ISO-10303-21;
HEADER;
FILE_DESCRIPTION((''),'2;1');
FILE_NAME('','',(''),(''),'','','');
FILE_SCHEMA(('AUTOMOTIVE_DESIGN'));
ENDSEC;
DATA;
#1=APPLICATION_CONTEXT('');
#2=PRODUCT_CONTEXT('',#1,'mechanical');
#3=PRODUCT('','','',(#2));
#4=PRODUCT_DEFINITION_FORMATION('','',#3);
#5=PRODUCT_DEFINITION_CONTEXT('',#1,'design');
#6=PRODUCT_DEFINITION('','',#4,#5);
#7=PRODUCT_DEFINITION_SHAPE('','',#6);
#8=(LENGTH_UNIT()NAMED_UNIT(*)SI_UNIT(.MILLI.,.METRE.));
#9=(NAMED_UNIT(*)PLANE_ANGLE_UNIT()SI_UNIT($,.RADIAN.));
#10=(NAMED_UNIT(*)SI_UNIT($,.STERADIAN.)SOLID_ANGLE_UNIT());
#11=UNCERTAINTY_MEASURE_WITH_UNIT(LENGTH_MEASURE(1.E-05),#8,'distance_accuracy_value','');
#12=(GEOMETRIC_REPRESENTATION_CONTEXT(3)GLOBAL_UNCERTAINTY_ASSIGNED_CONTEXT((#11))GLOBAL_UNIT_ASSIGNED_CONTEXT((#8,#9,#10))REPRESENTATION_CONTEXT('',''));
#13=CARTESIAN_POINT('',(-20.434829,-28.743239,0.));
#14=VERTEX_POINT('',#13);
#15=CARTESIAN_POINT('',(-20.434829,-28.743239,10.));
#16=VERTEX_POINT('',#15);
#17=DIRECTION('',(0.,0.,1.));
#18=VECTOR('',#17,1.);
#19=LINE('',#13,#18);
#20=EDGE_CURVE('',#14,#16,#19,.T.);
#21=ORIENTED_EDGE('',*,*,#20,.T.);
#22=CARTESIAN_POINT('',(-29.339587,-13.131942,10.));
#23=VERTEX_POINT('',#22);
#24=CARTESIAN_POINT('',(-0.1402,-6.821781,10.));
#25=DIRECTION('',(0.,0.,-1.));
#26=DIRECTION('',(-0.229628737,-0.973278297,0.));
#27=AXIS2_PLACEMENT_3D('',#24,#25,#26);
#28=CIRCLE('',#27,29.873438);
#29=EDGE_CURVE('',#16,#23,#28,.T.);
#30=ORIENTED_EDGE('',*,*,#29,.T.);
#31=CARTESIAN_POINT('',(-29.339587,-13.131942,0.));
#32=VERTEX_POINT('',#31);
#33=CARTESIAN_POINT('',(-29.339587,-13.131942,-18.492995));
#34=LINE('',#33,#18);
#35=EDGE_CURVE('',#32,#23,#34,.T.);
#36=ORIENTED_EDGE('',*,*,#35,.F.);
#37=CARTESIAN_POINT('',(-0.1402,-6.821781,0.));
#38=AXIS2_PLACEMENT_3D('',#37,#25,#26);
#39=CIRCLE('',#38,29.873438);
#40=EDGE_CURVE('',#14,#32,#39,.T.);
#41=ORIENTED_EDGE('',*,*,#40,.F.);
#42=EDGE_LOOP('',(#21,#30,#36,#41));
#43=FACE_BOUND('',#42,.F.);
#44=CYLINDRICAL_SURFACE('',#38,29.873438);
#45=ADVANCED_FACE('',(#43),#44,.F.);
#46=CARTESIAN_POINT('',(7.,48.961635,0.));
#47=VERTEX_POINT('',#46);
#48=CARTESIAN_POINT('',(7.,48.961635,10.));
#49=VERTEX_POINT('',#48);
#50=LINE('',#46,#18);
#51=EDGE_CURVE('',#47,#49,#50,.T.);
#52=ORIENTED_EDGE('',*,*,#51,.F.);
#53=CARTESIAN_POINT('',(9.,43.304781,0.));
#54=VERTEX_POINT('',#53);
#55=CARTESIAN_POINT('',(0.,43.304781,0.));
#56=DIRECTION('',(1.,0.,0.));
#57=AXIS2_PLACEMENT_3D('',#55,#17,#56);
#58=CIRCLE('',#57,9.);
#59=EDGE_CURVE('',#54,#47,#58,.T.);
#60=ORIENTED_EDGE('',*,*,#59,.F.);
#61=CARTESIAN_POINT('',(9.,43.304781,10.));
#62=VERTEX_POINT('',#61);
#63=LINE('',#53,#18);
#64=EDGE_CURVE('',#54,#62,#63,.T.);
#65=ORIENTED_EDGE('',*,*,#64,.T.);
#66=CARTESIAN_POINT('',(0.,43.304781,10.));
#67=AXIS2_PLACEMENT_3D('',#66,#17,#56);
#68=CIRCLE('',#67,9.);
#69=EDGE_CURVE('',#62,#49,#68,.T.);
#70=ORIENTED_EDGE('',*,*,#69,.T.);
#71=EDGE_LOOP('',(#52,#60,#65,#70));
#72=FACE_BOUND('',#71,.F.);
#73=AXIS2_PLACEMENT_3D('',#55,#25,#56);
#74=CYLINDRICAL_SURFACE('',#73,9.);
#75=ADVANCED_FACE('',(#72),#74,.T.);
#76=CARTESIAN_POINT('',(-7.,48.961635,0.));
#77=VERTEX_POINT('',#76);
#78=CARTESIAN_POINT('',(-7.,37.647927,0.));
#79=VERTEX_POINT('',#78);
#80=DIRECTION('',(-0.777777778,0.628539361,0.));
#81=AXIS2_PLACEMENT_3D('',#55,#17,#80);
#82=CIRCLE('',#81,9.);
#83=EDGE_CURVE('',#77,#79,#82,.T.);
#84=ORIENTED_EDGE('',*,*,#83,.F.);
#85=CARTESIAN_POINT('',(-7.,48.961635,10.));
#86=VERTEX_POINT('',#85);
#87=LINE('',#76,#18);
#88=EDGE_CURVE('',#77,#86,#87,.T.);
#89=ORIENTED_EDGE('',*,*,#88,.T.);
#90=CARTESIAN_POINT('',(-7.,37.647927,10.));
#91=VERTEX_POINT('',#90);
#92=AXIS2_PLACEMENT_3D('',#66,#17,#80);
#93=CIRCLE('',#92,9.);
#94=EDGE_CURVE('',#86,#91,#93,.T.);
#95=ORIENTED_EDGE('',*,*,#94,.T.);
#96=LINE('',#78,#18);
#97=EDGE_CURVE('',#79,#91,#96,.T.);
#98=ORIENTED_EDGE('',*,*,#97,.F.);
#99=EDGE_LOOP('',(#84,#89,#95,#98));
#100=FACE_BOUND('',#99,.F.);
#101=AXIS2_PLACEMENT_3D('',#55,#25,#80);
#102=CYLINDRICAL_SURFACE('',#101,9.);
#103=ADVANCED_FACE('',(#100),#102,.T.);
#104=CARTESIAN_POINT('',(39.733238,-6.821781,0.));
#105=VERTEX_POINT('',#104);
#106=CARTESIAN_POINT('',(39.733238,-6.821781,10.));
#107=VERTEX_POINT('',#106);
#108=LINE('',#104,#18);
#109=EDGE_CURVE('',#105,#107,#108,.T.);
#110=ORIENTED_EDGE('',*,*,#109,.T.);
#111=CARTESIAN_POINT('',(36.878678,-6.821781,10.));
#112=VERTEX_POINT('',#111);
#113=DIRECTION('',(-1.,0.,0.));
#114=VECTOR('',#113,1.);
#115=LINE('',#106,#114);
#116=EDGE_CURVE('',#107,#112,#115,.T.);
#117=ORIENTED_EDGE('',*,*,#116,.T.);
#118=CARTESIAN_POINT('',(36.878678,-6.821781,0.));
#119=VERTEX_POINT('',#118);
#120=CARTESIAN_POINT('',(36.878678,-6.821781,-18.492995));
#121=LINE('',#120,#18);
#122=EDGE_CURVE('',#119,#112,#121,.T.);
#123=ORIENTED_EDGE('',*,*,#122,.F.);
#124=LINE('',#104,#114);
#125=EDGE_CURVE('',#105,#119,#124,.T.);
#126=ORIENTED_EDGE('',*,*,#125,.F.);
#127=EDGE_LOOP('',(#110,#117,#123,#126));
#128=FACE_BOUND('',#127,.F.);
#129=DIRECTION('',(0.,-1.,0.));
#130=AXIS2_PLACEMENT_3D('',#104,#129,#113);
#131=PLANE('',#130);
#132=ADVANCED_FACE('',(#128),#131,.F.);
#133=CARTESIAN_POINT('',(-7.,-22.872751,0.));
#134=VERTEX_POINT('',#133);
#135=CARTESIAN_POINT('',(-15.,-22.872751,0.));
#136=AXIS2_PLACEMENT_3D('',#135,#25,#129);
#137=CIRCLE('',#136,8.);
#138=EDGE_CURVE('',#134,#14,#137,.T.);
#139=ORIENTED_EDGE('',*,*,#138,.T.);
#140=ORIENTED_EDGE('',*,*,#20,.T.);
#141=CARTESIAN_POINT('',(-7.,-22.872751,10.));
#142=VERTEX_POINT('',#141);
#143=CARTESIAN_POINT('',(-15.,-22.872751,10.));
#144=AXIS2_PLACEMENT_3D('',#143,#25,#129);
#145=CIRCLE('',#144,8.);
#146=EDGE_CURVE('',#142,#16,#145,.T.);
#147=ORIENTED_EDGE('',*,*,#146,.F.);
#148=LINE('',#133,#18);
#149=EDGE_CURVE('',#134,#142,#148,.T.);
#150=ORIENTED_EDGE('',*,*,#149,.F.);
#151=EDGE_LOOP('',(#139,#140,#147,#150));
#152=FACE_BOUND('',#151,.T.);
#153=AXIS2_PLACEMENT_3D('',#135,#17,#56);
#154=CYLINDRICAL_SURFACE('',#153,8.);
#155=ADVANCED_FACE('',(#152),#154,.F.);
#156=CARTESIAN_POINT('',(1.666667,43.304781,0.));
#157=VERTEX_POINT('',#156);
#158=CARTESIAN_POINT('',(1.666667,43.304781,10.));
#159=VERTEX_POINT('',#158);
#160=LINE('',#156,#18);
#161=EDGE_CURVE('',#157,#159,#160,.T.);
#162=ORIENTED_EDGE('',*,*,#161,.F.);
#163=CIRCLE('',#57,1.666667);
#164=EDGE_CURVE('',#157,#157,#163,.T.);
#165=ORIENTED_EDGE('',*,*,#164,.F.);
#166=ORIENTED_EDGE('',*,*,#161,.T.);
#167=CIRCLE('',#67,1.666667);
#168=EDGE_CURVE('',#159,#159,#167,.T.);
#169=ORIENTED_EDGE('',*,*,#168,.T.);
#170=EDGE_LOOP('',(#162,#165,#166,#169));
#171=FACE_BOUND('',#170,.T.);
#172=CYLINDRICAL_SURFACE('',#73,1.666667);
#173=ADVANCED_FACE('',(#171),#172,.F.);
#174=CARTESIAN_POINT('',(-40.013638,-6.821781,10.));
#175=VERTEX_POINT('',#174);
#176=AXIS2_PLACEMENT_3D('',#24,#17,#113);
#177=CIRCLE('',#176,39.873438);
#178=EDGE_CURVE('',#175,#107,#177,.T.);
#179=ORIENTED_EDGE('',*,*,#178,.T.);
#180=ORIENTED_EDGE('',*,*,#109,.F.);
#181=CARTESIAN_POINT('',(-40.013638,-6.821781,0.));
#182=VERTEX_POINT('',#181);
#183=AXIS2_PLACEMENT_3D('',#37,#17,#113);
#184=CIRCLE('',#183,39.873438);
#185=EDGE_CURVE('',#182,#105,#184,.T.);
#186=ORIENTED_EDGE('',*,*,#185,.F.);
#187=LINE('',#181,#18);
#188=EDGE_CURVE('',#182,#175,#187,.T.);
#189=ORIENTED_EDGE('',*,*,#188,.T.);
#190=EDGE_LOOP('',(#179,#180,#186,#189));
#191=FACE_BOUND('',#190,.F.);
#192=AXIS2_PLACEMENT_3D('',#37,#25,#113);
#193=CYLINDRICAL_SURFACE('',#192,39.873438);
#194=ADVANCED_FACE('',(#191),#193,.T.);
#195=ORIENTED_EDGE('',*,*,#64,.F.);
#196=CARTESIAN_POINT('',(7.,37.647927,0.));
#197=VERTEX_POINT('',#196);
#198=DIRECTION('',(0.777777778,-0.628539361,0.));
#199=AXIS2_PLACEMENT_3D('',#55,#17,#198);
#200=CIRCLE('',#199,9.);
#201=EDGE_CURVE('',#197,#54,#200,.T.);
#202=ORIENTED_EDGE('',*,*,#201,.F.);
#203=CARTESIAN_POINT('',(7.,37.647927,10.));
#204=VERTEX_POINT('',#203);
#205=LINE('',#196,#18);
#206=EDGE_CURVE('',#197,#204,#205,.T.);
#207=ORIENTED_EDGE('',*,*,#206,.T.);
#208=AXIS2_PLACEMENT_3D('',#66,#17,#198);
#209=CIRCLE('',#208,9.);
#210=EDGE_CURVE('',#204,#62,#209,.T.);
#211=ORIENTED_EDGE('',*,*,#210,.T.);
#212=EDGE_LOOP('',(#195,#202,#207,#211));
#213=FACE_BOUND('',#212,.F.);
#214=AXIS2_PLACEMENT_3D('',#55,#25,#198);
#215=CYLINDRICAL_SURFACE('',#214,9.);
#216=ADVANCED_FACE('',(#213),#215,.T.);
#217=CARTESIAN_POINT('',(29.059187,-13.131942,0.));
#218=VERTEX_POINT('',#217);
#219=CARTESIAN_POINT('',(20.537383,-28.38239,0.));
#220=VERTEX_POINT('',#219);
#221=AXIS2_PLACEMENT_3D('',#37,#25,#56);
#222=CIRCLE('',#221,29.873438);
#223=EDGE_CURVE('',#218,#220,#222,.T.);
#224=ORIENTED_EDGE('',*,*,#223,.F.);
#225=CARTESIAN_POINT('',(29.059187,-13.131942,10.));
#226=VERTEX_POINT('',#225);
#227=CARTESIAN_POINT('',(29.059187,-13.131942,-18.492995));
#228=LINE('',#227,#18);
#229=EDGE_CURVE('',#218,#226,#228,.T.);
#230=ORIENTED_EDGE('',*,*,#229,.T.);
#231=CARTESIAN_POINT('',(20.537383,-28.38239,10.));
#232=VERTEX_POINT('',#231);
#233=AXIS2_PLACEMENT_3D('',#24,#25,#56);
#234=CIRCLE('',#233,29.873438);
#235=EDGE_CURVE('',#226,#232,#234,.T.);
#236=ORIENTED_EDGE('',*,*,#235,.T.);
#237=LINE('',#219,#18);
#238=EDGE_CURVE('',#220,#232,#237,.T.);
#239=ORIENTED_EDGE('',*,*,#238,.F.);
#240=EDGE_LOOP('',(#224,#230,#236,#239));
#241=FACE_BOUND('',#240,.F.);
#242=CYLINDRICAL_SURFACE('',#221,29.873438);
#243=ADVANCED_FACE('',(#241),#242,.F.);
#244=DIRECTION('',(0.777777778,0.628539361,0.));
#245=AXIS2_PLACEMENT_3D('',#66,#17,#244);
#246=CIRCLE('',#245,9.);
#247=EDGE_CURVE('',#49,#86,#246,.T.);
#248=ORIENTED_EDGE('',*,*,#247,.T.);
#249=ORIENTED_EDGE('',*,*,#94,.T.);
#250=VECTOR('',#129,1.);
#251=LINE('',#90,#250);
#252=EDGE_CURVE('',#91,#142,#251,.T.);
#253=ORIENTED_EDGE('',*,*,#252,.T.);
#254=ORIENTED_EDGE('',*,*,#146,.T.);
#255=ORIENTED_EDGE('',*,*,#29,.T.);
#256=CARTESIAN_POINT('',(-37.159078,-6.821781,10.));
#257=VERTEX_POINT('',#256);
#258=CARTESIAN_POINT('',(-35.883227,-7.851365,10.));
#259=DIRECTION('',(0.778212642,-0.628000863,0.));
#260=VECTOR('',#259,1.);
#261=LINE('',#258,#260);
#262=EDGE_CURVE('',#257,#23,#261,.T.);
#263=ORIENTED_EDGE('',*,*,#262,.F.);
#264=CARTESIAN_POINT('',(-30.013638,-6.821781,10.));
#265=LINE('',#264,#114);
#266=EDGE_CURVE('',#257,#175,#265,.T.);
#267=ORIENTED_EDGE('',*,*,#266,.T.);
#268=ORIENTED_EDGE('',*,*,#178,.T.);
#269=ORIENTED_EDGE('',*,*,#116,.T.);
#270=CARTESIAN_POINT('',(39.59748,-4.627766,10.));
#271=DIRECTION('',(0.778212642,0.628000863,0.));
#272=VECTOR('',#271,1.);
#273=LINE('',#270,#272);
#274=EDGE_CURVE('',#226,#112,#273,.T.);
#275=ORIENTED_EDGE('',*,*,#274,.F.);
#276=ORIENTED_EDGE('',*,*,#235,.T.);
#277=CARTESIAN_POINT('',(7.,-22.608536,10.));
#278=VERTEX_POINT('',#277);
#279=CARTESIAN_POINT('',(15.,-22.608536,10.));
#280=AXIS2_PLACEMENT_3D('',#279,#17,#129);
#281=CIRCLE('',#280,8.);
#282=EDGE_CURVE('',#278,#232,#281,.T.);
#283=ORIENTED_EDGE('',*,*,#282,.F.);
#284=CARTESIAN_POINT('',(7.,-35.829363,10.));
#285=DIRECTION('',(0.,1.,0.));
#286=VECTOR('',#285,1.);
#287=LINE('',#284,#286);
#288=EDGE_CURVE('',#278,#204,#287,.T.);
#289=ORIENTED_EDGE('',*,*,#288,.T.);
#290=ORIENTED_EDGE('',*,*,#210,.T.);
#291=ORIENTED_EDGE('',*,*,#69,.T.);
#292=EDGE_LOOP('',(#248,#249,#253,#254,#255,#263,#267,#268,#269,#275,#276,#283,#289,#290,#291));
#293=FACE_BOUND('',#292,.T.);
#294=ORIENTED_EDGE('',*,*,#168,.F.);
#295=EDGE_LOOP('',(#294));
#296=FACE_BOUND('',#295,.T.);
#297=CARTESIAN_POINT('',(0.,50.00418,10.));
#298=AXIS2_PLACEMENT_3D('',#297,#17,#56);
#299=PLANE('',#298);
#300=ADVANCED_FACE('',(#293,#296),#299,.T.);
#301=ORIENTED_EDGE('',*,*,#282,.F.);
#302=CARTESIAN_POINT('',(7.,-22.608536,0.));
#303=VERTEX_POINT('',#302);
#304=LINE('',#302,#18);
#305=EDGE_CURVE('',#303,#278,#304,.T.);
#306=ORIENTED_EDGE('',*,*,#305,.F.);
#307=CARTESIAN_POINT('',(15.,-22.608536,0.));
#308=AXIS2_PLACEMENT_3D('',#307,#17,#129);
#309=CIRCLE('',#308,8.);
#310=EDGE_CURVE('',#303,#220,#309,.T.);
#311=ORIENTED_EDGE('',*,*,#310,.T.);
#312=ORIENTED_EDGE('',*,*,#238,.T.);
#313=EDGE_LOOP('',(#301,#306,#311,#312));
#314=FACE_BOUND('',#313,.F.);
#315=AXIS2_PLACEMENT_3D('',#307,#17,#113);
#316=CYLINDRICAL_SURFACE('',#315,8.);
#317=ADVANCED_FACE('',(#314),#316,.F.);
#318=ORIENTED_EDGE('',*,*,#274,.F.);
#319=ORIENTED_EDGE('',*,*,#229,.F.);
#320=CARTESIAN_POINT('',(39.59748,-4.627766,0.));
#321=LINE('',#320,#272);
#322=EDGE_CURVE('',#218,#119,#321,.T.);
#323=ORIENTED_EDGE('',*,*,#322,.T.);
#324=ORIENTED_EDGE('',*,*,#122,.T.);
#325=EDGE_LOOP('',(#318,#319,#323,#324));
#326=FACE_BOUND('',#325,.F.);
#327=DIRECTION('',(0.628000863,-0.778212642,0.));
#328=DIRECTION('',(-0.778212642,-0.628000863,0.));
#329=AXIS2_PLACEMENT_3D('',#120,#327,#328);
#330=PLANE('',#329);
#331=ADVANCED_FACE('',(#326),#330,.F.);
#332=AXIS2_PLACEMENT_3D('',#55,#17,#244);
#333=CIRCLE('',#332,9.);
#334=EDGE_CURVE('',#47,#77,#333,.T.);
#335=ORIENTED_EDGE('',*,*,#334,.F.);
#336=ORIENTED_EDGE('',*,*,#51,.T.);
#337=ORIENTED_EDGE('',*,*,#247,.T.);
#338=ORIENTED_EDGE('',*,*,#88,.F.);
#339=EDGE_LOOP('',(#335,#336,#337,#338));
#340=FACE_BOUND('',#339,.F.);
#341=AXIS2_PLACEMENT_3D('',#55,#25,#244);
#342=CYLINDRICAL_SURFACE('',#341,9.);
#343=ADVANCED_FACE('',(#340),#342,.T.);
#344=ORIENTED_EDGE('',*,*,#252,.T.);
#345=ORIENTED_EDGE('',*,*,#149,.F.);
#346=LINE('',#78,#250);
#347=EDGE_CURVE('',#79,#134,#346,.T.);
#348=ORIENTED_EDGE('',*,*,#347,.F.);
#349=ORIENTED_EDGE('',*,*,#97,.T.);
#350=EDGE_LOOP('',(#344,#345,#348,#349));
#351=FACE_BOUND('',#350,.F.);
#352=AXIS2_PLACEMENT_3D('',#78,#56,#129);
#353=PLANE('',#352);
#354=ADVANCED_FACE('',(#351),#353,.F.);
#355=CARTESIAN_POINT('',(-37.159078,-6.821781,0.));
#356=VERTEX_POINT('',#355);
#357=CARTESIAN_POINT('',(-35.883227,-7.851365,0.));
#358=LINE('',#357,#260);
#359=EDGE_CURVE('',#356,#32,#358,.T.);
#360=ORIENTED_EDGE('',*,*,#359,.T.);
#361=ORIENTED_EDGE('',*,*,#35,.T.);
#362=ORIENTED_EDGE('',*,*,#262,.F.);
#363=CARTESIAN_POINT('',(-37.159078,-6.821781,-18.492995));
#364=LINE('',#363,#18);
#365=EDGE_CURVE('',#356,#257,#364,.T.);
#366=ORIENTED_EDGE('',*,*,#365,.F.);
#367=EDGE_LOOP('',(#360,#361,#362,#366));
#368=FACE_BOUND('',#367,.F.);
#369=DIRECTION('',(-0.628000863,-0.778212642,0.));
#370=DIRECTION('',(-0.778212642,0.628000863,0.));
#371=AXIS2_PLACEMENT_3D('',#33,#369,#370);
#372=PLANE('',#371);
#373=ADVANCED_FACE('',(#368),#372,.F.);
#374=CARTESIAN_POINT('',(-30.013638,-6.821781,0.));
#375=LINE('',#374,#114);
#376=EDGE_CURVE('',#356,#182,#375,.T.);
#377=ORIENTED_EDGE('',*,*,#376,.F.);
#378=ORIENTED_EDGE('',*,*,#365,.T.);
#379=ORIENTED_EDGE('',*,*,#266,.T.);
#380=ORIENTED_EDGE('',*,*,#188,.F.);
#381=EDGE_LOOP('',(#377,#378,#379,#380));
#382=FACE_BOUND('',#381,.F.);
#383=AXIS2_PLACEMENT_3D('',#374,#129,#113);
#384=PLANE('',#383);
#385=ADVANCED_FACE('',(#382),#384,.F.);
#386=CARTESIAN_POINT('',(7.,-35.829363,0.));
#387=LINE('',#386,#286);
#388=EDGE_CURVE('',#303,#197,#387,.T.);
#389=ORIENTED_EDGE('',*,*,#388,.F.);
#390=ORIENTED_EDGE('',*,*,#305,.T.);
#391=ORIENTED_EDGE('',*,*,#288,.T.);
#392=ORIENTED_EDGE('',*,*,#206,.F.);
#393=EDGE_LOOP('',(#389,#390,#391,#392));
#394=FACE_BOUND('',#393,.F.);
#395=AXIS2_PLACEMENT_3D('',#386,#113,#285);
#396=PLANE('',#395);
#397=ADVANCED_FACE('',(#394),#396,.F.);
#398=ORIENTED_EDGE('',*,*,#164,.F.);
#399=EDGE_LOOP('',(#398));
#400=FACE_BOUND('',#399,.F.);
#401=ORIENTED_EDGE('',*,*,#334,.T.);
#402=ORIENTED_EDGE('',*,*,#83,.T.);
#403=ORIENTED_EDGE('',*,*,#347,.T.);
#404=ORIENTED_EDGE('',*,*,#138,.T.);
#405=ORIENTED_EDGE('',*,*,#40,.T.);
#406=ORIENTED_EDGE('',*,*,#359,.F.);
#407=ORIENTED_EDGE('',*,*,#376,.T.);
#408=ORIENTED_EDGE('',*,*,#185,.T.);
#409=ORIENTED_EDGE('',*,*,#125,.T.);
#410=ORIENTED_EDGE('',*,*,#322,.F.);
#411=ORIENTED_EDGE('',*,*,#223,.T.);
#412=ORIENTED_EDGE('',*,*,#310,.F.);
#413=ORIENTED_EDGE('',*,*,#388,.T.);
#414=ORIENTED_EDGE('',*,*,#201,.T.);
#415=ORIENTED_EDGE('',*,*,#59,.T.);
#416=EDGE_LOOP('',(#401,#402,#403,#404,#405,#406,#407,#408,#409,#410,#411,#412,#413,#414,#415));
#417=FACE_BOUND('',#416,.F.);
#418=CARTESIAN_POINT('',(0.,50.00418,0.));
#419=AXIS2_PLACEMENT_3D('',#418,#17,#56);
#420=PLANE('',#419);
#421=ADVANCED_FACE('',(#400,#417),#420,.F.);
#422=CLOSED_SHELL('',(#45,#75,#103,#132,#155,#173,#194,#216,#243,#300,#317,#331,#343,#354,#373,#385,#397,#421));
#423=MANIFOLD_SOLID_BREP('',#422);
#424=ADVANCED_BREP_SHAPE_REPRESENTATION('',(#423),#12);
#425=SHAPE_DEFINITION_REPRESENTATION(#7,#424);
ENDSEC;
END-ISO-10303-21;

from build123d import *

# Parameters (mm, degrees)
F1_R        = 1.6666666667
F2_DEPTH    = 10
F3_T1_DEPTH = 46.985990025
F4_R        = 8


# Not quite as in the source:
# - a fillet or chamfer that OpenCascade refuses, or shapes differently, is made with other operations: its cross-section is extruded or revolved along the edge and cut away or added
# - a feature names something its author has since deleted; it is built from what else it names


with BuildPart() as f2:
    # F1 (on Top) → F2 (new body)
    with BuildSketch(Plane.XY):
        with BuildLine():
            ThreePointArc((7, 48.9616353347), (0, 52.3047810852), (-7, 48.9616353347))
            Line((-7, 48.9616353347), (7, 48.9616353347))
        make_face()
        with BuildLine():
            Line((7, 48.9616353347), (-7, 48.9616353347))
            Line((-7, 48.9616353347), (-7, 37.6479268357))
            ThreePointArc((-7, 37.6479268357), (0, 34.3047810852), (7, 37.6479268357))
            Line((7, 37.6479268357), (7, 48.9616353347))
        make_face()
        with Locations((0, 43.3047810852)):
            Circle(F1_R, mode=Mode.SUBTRACT)
        with BuildLine():
            Line((-7, 37.6479268357), (-7, 48.9616353347))
            ThreePointArc((-7, 48.9616353347), (-9, 43.3047810852), (-7, 37.6479268357))
        make_face()
        with BuildLine():
            ThreePointArc((9, 43.3047810852), (8.4852813742, 46.3047810852), (7, 48.9616353347))
            Line((7, 48.9616353347), (7, 37.6479268357))
            ThreePointArc((7, 37.6479268357), (8.4852813742, 40.3047810852), (9, 43.3047810852))
        make_face()
        with BuildLine():
            ThreePointArc((7, 37.6479268357), (0, 34.3047810852), (-7, 37.6479268357))
            Line((-7, 37.6479268357), (-7, -35.8969497675))
            ThreePointArc((-7, -35.8969497675), (0.0040151824, -36.6948708101), (7, -35.8293633875))
            Line((7, -35.8293633875), (7, 37.6479268357))
        make_face()
        with BuildLine():
            ThreePointArc((7, -35.8293633875), (0.0040151824, -36.6948708101), (-7, -35.8969497675))
            ThreePointArc((-7, -35.8969497675), (-23.5639927575, -25.3622297337), (-30.0136384001, -6.8217806199))
            Line((-30.0136384001, -6.8217806199), (-39.6402001052, -6.8217806199))
            Line((-39.6402001052, -6.8217806199), (-40.0136384001, -6.8217806199))
            ThreePointArc((-40.0136384001, -6.8217806199), (-0.1402001052, -46.6952189148), (39.7332381897, -6.8217806199))
            Line((39.7332381897, -6.8217806199), (29.7332381897, -6.8217806199))
            ThreePointArc((29.7332381897, -6.8217806199), (23.3728244006, -25.248934338), (7, -35.8293633875))
        make_face()
    extrude(amount=F2_DEPTH)

    # F3: chamfer of 8 on 2 edges, made by hand

    # F3_s2 → F3_t1 (cut)
    with BuildSketch(Plane.XY.offset(-18.4929950125)):
        with BuildLine():
            Line((-29.3395867315, -13.1319419656), (-37.1590781039, -6.8217806199))
            Line((-37.1590781039, -6.8217806199), (-30.0136384001, -6.8217806199))
            ThreePointArc((-30.0136384001, -6.8217806199), (-29.8322989719, -10.108356414), (-29.3395867315, -13.1319419656))
        make_face()
        with BuildLine():
            Line((36.8786778935, -6.8217806199), (29.0591865211, -13.1319419656))
            ThreePointArc((29.0591865211, -13.1319419656), (29.5518987615, -10.108356414), (29.7332381897, -6.8217806199))
            Line((29.7332381897, -6.8217806199), (36.8786778935, -6.8217806199))
        make_face()
    extrude(amount=F3_T1_DEPTH, mode=Mode.SUBTRACT)

    # F4
    f4_edges = [f2.edges().sort_by_distance(p)[0] for p in [
        (-7, -35.89695, 5),
        (7, -35.829363, 5),
    ]]
    fillet(f4_edges, radius=F4_R)


solid = f2.part
